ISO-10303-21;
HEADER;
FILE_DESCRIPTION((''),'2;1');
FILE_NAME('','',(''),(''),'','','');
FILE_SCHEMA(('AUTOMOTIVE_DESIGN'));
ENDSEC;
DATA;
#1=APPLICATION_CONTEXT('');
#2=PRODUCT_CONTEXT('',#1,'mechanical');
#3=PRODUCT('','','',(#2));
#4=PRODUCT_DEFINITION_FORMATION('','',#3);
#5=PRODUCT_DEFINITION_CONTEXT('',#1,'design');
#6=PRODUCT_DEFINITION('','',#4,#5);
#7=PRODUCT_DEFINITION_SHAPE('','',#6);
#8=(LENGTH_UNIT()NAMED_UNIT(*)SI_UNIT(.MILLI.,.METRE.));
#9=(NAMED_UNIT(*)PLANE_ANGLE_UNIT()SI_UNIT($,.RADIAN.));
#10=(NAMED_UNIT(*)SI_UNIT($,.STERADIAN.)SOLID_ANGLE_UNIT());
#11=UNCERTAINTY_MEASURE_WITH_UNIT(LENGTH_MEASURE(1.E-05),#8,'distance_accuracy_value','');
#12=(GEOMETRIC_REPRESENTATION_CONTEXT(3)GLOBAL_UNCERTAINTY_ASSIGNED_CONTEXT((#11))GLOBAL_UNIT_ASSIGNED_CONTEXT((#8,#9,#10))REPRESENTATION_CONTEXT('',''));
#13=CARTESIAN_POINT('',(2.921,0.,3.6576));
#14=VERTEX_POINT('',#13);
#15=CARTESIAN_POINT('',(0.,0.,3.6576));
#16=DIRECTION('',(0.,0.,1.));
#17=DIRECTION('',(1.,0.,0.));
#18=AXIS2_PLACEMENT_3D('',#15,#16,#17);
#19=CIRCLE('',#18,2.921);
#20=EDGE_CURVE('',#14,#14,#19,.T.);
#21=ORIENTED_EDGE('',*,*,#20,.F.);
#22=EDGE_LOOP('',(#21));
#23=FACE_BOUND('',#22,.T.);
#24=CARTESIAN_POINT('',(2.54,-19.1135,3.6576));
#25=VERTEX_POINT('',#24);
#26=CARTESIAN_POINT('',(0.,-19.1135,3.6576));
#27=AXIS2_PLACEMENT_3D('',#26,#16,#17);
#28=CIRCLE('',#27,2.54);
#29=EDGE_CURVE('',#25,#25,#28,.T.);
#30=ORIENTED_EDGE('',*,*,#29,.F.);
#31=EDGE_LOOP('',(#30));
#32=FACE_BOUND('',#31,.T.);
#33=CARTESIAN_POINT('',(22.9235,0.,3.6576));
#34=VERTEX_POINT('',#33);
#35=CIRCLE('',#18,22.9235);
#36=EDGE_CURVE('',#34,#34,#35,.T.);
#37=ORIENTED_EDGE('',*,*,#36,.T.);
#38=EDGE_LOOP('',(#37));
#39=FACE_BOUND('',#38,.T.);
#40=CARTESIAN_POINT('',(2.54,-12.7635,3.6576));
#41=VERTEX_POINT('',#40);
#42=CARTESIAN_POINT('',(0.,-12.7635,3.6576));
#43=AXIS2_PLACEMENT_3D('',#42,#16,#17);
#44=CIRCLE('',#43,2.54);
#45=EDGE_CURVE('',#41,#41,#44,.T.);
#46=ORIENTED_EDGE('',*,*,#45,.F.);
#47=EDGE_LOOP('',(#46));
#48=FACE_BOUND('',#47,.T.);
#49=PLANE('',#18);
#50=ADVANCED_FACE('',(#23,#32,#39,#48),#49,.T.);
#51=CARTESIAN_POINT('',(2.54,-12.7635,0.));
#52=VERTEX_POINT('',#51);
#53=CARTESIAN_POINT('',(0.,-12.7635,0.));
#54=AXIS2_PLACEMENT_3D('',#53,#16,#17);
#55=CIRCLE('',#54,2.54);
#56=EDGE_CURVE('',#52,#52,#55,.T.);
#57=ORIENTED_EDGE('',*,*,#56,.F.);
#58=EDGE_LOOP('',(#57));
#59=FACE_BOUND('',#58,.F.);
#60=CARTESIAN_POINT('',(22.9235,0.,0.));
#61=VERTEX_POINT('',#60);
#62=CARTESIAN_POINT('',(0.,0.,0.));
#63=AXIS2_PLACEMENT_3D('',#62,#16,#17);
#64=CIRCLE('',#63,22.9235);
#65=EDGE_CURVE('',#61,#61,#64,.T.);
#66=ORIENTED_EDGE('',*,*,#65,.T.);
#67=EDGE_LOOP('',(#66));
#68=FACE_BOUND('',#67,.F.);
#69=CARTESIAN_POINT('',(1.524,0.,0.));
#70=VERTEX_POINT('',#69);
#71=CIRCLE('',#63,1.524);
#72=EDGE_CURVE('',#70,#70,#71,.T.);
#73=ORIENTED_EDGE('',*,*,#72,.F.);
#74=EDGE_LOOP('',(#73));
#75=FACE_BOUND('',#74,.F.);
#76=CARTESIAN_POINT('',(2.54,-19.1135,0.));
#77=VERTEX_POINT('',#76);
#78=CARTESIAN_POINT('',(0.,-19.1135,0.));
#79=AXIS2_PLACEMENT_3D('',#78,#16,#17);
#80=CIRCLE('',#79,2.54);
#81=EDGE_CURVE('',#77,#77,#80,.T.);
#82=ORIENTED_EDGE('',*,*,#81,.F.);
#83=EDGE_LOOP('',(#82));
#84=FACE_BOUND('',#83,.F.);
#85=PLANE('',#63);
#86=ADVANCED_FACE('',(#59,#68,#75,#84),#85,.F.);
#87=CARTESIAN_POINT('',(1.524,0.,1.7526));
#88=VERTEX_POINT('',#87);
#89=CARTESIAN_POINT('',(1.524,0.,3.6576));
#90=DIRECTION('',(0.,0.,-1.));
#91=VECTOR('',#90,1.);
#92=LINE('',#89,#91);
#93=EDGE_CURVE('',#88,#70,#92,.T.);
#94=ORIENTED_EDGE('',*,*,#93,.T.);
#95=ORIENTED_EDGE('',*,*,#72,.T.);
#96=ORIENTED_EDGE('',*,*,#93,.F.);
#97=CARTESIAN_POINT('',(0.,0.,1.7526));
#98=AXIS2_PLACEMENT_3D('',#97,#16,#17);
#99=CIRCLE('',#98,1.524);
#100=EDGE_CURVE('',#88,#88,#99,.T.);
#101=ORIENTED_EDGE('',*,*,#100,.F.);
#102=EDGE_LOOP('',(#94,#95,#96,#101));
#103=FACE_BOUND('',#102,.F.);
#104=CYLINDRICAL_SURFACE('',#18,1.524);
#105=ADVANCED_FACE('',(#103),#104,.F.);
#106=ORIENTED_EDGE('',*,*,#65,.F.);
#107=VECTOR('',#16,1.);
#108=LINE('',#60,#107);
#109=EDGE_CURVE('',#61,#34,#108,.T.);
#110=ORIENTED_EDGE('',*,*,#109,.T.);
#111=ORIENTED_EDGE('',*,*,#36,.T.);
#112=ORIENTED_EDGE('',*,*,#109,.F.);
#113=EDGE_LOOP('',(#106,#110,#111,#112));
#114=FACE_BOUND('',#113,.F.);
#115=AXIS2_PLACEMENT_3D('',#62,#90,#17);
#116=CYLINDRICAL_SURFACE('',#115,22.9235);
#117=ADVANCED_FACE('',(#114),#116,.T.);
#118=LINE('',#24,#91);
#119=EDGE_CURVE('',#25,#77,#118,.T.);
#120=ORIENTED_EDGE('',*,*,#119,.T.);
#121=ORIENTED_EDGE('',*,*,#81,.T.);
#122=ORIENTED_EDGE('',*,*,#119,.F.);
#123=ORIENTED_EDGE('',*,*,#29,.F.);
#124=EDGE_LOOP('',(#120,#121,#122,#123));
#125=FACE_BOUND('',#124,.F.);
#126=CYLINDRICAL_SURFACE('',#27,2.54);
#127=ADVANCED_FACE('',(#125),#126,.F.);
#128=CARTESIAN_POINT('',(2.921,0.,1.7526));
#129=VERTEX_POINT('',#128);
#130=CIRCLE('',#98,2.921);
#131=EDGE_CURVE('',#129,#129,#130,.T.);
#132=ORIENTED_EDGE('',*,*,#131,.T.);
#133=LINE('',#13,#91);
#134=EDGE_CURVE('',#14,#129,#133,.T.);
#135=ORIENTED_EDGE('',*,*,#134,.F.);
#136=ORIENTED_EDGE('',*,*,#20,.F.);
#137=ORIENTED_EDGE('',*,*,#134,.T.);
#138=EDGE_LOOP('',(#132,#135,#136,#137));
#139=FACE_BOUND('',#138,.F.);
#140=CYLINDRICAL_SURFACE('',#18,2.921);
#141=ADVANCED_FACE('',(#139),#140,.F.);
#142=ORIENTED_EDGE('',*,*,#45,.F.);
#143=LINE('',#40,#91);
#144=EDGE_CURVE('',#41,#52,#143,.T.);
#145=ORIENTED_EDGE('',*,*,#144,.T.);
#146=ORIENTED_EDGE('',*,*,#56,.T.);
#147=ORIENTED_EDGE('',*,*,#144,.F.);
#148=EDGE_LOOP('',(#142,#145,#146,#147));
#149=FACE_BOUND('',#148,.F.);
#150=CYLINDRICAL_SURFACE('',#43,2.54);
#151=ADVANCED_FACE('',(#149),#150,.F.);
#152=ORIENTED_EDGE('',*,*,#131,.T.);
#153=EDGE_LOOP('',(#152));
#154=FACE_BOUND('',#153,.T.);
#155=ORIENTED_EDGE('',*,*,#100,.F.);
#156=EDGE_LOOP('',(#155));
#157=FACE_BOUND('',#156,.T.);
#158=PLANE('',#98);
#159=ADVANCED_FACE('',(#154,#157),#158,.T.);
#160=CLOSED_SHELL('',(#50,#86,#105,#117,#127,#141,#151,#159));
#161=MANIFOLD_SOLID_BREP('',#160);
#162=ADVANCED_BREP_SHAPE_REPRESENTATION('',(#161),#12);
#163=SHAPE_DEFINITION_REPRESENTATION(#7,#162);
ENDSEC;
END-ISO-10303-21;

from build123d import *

# Parameters (mm, degrees)
F0_R     = 22.9235
F1_DEPTH = 3.6576
F2_R     = 2.54
F3_DEPTH = 3.6586
F2_R_2   = 1.524
F4_DEPTH = 25.4
F5_R     = 2.921
F5_R_2   = 1.524
F6_DEPTH = 1.905


# Not quite as in the source:
# - a feature names something its author has since deleted; it is built from what else it names


with BuildPart() as f1:
    # F0 (on Top) → F1 (new body)
    with BuildSketch(Plane.XY):
        Circle(F0_R)
    extrude(amount=F1_DEPTH)

    # F2 (on face) → F3 (cut, through all)
    with BuildSketch(Plane.XY.offset(3.6576)):
        with Locations((0, -19.1135)):
            Circle(F2_R)
        with Locations((0, -12.7635)):
            Circle(F2_R)
    extrude(amount=-F3_DEPTH, mode=Mode.SUBTRACT)

    # F2 (on face) → F4 (cut)
    with BuildSketch(Plane.XY.offset(3.6576)):
        Circle(F2_R_2)
    extrude(amount=-F4_DEPTH, mode=Mode.SUBTRACT)

    # F5 (on face) → F6 (cut)
    with BuildSketch(Plane.XY.offset(3.6576)):
        Circle(F5_R)
        Circle(F5_R_2, mode=Mode.SUBTRACT)
    extrude(amount=-F6_DEPTH, mode=Mode.SUBTRACT)


solid = f1.part
